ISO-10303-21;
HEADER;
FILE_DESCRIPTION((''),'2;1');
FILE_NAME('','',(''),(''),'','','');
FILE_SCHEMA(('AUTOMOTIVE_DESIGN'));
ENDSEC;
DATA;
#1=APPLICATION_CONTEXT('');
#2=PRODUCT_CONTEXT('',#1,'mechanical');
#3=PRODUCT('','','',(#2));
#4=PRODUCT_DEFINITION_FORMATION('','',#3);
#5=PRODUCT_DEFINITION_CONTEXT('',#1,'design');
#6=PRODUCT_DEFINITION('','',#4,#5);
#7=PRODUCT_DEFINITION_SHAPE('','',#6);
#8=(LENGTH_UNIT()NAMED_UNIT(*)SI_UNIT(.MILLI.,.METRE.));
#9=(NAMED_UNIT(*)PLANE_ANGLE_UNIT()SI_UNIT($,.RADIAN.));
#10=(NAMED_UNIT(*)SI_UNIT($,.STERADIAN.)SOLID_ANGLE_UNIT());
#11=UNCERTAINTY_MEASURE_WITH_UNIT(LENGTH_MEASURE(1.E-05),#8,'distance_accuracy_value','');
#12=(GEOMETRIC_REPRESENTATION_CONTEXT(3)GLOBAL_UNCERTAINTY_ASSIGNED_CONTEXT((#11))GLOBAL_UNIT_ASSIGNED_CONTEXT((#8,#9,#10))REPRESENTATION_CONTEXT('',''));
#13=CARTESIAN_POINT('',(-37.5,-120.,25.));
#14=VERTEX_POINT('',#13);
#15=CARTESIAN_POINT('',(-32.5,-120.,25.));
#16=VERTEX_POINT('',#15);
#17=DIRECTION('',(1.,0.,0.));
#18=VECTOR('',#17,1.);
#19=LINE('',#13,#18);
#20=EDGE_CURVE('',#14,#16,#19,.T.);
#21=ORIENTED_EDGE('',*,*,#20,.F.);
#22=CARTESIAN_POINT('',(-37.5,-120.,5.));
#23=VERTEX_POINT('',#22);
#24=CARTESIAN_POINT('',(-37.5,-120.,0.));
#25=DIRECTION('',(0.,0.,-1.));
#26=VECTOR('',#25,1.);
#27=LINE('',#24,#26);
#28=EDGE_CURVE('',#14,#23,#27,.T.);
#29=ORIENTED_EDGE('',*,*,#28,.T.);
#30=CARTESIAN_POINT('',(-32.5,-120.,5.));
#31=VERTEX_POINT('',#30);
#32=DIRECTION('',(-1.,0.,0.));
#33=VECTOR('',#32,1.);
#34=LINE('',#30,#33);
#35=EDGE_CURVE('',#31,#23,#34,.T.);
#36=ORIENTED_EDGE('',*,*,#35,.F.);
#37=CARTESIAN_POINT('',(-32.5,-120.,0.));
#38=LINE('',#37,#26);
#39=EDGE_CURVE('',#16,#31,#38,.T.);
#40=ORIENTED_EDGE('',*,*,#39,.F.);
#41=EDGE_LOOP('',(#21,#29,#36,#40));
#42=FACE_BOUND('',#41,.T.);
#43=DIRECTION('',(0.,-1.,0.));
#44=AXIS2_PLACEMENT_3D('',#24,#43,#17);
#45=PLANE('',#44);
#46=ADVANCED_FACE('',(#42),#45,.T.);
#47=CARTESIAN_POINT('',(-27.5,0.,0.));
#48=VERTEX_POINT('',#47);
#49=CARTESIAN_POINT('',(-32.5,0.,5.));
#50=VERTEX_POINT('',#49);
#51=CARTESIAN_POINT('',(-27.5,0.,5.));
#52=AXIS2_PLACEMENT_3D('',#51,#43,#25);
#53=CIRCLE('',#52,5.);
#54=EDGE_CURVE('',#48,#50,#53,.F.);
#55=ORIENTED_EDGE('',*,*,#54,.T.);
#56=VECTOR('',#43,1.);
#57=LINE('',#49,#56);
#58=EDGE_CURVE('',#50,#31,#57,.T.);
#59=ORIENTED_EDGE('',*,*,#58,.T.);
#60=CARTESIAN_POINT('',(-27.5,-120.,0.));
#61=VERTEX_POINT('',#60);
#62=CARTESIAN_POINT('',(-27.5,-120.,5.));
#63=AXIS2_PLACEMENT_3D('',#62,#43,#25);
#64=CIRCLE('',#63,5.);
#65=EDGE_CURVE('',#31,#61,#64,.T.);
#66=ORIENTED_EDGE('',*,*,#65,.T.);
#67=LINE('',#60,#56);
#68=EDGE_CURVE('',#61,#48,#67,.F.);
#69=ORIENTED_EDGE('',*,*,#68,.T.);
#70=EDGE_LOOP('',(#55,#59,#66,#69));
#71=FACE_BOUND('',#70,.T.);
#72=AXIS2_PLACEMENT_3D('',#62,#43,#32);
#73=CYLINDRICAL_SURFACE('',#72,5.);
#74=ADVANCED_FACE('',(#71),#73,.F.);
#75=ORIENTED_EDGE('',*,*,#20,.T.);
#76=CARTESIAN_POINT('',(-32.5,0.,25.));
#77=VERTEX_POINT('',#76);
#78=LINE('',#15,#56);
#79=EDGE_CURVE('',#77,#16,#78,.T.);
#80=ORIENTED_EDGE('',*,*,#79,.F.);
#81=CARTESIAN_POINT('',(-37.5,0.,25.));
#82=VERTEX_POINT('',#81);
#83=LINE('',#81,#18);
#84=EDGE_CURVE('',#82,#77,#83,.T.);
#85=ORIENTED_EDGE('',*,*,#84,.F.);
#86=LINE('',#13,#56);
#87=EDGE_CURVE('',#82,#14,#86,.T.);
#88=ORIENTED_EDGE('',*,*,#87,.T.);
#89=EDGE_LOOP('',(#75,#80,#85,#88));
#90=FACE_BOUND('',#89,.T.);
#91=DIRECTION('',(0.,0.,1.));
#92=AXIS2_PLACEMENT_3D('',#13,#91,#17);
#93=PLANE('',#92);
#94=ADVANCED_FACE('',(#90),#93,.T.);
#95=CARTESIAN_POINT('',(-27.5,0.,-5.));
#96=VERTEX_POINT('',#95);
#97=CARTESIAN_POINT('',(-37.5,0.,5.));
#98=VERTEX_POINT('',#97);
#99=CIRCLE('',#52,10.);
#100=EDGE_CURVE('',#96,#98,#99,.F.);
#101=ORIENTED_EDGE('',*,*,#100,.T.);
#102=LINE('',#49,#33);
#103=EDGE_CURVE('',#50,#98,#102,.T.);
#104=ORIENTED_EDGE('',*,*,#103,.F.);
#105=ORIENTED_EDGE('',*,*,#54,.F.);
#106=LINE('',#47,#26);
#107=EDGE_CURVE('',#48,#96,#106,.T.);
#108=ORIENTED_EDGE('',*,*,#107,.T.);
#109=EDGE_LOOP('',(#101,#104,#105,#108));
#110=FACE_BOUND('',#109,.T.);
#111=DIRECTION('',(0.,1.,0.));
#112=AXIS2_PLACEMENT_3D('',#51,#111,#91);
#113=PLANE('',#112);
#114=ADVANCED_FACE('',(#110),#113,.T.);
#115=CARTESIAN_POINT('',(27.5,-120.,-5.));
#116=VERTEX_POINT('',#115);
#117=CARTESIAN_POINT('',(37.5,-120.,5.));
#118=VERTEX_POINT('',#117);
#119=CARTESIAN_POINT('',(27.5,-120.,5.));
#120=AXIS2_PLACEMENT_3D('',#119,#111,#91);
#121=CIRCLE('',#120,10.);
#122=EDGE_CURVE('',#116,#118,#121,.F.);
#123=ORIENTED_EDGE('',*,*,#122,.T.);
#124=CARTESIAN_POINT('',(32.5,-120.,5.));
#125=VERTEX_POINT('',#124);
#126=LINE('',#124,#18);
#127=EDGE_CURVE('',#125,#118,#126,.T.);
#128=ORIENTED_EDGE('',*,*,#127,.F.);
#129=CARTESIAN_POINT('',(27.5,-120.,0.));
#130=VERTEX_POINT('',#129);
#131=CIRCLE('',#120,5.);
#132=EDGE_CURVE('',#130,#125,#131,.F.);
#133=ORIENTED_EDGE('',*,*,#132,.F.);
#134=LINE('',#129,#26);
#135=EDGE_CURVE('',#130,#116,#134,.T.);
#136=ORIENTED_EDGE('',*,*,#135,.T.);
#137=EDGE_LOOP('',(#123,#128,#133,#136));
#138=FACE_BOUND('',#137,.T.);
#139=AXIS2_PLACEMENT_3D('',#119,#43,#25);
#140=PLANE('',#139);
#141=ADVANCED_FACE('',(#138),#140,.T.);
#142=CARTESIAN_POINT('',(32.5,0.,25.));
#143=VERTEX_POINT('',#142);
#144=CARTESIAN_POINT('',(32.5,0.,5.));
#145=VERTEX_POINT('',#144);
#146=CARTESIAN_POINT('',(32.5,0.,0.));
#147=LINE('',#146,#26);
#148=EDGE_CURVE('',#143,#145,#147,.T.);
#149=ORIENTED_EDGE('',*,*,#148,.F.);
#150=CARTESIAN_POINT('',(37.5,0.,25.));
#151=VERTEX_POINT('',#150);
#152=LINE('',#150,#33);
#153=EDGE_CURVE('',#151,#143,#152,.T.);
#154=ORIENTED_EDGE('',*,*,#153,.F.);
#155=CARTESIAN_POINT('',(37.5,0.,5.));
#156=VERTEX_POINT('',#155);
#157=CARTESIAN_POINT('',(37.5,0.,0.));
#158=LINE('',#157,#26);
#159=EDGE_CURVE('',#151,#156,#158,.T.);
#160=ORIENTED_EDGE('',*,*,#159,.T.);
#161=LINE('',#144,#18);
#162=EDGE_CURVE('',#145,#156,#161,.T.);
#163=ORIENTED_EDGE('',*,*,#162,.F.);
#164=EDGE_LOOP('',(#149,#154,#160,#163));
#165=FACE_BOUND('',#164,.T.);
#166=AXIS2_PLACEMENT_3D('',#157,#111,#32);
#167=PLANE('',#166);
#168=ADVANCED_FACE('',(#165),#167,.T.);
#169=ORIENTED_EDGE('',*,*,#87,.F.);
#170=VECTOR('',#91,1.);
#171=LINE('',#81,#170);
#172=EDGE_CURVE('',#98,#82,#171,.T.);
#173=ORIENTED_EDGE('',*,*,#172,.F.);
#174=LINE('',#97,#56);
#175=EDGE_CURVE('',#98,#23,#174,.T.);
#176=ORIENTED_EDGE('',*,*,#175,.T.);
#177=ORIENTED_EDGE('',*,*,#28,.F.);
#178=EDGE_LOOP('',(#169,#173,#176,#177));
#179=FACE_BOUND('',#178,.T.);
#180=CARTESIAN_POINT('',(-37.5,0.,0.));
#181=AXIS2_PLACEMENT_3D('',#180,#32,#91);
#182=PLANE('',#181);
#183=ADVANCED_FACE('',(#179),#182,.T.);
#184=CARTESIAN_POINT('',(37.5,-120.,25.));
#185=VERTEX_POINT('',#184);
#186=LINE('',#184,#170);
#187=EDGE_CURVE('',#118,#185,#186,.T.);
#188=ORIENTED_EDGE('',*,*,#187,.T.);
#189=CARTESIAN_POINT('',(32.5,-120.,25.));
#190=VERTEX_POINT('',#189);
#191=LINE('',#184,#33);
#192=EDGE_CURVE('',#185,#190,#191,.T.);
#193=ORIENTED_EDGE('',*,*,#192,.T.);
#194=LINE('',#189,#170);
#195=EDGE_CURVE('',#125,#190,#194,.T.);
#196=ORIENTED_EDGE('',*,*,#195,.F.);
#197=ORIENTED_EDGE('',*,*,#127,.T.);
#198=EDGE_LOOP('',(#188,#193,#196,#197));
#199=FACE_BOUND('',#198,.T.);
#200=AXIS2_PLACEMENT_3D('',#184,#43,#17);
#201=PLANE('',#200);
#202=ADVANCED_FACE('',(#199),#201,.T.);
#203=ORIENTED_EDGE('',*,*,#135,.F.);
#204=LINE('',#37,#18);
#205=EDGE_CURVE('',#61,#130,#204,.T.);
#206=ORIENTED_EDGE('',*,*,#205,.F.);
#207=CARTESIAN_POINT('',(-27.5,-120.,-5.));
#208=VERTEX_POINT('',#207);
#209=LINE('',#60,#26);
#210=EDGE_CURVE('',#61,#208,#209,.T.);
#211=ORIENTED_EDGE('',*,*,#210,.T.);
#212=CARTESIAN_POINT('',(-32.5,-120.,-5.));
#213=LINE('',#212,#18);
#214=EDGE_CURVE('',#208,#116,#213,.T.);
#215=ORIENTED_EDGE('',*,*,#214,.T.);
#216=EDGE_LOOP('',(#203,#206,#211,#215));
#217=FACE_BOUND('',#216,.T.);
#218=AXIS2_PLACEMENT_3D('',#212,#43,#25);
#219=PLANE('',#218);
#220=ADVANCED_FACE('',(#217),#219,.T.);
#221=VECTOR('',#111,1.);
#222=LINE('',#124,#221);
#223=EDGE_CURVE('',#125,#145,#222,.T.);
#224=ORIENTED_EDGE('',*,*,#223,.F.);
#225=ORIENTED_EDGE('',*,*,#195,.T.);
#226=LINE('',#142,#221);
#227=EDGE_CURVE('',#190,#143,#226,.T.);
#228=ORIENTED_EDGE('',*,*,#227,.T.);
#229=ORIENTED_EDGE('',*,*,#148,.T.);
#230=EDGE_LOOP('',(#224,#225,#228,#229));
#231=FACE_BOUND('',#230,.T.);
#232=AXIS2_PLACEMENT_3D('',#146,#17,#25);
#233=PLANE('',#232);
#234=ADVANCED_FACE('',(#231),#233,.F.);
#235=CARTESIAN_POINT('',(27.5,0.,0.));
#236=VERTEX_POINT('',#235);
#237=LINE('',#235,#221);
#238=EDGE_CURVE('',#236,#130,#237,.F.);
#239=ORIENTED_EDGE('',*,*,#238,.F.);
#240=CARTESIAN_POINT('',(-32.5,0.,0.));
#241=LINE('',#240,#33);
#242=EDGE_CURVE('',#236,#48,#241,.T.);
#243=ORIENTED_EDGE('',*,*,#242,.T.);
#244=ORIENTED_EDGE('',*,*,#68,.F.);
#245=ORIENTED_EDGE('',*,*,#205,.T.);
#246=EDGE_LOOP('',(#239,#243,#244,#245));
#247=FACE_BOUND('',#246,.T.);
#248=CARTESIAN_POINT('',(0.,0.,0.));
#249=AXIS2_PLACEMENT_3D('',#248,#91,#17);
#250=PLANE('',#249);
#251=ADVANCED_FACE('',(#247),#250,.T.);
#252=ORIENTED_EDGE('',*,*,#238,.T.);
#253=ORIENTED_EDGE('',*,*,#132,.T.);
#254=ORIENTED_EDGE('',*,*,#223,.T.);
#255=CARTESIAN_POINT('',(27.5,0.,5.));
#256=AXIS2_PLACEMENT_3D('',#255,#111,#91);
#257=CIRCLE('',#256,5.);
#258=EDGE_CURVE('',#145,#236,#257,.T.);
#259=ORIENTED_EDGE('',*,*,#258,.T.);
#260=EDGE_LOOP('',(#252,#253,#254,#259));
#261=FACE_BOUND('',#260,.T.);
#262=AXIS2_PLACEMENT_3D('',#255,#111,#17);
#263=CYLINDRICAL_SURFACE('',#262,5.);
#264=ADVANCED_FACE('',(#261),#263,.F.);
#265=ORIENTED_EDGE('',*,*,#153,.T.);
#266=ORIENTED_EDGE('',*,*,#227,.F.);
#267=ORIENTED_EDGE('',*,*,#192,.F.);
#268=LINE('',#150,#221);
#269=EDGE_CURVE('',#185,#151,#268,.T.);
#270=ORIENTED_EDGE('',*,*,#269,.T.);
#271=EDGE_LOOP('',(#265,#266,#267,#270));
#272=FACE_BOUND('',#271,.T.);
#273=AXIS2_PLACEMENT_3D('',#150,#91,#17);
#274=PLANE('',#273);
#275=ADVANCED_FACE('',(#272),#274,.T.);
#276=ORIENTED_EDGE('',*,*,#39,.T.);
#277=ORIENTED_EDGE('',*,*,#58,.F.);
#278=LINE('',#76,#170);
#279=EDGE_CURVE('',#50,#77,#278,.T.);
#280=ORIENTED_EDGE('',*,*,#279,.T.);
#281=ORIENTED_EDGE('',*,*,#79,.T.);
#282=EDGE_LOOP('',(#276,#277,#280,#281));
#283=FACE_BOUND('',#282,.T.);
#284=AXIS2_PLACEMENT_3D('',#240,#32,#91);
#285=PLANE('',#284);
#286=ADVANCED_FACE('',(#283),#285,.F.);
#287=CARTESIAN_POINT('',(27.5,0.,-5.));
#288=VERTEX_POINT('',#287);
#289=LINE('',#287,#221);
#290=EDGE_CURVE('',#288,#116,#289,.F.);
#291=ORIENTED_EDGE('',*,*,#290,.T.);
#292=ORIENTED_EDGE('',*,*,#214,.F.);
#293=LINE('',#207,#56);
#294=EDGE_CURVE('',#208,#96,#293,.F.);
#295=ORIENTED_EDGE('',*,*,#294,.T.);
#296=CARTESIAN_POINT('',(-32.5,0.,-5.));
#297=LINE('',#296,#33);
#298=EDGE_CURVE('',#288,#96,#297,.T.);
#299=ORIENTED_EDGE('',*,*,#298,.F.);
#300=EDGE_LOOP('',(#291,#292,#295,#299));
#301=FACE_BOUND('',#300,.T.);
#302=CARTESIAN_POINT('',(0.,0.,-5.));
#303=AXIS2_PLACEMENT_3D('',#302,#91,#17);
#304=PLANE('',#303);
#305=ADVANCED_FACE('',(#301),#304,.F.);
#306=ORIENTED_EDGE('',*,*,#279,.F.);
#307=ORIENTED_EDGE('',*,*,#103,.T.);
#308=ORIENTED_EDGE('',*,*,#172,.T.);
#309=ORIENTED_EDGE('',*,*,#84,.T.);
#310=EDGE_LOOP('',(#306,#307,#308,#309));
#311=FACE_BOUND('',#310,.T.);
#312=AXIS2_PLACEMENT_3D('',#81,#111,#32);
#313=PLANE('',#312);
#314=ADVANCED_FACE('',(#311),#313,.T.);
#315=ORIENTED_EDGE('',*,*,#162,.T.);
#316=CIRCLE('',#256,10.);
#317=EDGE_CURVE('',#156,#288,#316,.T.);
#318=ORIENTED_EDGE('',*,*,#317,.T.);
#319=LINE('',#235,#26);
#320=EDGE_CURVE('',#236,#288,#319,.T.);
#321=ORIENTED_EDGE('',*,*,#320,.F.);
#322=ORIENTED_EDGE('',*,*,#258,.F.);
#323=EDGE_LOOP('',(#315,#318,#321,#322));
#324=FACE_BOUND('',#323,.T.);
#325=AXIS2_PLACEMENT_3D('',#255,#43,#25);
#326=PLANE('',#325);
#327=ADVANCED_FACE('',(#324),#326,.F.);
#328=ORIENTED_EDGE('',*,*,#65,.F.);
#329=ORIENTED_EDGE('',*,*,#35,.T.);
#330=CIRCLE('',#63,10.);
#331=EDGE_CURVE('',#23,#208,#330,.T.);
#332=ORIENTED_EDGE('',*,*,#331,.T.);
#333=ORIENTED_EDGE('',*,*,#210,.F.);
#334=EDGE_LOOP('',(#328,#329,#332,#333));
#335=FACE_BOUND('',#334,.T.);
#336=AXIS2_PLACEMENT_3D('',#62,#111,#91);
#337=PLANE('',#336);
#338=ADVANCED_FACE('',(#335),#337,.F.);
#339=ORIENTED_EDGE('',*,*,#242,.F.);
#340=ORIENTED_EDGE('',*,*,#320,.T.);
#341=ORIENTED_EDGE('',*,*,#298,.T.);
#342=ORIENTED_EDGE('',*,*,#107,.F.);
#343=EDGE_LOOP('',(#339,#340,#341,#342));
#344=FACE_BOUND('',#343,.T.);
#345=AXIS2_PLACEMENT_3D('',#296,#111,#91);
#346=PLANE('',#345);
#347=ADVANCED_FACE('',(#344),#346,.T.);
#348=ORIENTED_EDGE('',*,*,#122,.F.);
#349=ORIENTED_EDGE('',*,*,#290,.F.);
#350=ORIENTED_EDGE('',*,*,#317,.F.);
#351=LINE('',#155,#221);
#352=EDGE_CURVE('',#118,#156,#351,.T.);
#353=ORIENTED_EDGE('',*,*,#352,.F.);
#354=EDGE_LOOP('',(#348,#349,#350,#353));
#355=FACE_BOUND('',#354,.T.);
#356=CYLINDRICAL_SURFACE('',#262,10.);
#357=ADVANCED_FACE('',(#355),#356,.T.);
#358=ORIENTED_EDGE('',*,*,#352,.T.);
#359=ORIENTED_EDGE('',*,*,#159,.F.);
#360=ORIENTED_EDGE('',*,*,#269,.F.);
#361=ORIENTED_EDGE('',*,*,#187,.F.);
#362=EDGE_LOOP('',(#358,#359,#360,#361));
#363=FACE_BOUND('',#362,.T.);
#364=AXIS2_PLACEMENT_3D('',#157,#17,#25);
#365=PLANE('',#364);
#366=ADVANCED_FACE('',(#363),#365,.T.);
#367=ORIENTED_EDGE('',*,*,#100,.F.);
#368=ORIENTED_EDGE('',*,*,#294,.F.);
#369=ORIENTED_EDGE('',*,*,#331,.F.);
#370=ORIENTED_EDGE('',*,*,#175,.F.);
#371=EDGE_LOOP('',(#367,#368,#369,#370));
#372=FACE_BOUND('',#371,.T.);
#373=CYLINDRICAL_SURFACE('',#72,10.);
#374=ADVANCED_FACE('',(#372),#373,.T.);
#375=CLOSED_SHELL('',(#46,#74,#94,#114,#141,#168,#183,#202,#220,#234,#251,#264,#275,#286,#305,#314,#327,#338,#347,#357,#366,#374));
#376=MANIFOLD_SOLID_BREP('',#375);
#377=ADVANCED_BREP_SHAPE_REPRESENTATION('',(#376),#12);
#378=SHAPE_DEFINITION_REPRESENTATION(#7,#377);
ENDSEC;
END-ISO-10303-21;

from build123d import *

# Parameters (mm, degrees)
SKETCH1_W                    = 65
SKETCH1_H                    = 120
BASE_FLANGE1_DEPTH           = 5
EDGE_FLANGE1_STRIP_W         = 30
EDGE_FLANGE1_STRIP_H         = 5
EDGE_FLANGE1_STRIP_CUT_DEPTH = 120
EDGE_FLANGE1_DEPTH           = 120
EDGE_FLANGE2_STRIP_W         = 30
EDGE_FLANGE2_STRIP_H         = 5
EDGE_FLANGE2_STRIP_CUT_DEPTH = 120
EDGE_FLANGE2_DEPTH           = 120


# Sheet-metal steps are written as plain solids
with BuildPart() as part:
    # Sketch1 → Base-Flange1 (new body)
    with BuildSketch(Plane.XY):
        with Locations((0, -60)):
            Rectangle(SKETCH1_W, SKETCH1_H)
    extrude(amount=-BASE_FLANGE1_DEPTH)

    # Edge-Flange1 strip (across the edge) → Edge-Flange1 strip cut (cut)
    with BuildSketch(Plane(origin=(32.5, -120, 0), x_dir=(-1, 0, 0), z_dir=(0, 1, 0))):
        with Locations((-10, -2.5)):
            Rectangle(EDGE_FLANGE1_STRIP_W, EDGE_FLANGE1_STRIP_H)
    extrude(amount=EDGE_FLANGE1_STRIP_CUT_DEPTH, mode=Mode.SUBTRACT)

    # Edge-Flange1 section (across the edge) → Edge-Flange1 (add)
    with BuildSketch(Plane(origin=(32.5, -120, 0), x_dir=(-1, 0, 0), z_dir=(0, 1, 0))):
        with BuildLine():
            Line((-5, 5), (-5, 25))
            Line((-5, 25), (0, 25))
            Line((0, 25), (0, 5))
            ThreePointArc((0, 5), (1.464466094, 1.464466094), (5, 0))
            Line((5, 0), (5, -5))
            ThreePointArc((5, -5), (-2.071067812, -2.071067812), (-5, 5))
        make_face()
    extrude(amount=EDGE_FLANGE1_DEPTH)

    # Edge-Flange2 strip (across the edge) → Edge-Flange2 strip cut (cut)
    with BuildSketch(Plane(origin=(-32.5, 0, 0), x_dir=(1, 0, 0), z_dir=(0, -1, 0))):
        with Locations((-10, -2.5)):
            Rectangle(EDGE_FLANGE2_STRIP_W, EDGE_FLANGE2_STRIP_H)
    extrude(amount=EDGE_FLANGE2_STRIP_CUT_DEPTH, mode=Mode.SUBTRACT)

    # Edge-Flange2 section (across the edge) → Edge-Flange2 (add)
    with BuildSketch(Plane(origin=(-32.5, 0, 0), x_dir=(1, 0, 0), z_dir=(0, -1, 0))):
        with BuildLine():
            Line((-5, 5), (-5, 25))
            Line((-5, 25), (0, 25))
            Line((0, 25), (0, 5))
            ThreePointArc((0, 5), (1.464466094, 1.464466094), (5, 0))
            Line((5, 0), (5, -5))
            ThreePointArc((5, -5), (-2.071067812, -2.071067812), (-5, 5))
        make_face()
    extrude(amount=EDGE_FLANGE2_DEPTH)


solid = part.part
